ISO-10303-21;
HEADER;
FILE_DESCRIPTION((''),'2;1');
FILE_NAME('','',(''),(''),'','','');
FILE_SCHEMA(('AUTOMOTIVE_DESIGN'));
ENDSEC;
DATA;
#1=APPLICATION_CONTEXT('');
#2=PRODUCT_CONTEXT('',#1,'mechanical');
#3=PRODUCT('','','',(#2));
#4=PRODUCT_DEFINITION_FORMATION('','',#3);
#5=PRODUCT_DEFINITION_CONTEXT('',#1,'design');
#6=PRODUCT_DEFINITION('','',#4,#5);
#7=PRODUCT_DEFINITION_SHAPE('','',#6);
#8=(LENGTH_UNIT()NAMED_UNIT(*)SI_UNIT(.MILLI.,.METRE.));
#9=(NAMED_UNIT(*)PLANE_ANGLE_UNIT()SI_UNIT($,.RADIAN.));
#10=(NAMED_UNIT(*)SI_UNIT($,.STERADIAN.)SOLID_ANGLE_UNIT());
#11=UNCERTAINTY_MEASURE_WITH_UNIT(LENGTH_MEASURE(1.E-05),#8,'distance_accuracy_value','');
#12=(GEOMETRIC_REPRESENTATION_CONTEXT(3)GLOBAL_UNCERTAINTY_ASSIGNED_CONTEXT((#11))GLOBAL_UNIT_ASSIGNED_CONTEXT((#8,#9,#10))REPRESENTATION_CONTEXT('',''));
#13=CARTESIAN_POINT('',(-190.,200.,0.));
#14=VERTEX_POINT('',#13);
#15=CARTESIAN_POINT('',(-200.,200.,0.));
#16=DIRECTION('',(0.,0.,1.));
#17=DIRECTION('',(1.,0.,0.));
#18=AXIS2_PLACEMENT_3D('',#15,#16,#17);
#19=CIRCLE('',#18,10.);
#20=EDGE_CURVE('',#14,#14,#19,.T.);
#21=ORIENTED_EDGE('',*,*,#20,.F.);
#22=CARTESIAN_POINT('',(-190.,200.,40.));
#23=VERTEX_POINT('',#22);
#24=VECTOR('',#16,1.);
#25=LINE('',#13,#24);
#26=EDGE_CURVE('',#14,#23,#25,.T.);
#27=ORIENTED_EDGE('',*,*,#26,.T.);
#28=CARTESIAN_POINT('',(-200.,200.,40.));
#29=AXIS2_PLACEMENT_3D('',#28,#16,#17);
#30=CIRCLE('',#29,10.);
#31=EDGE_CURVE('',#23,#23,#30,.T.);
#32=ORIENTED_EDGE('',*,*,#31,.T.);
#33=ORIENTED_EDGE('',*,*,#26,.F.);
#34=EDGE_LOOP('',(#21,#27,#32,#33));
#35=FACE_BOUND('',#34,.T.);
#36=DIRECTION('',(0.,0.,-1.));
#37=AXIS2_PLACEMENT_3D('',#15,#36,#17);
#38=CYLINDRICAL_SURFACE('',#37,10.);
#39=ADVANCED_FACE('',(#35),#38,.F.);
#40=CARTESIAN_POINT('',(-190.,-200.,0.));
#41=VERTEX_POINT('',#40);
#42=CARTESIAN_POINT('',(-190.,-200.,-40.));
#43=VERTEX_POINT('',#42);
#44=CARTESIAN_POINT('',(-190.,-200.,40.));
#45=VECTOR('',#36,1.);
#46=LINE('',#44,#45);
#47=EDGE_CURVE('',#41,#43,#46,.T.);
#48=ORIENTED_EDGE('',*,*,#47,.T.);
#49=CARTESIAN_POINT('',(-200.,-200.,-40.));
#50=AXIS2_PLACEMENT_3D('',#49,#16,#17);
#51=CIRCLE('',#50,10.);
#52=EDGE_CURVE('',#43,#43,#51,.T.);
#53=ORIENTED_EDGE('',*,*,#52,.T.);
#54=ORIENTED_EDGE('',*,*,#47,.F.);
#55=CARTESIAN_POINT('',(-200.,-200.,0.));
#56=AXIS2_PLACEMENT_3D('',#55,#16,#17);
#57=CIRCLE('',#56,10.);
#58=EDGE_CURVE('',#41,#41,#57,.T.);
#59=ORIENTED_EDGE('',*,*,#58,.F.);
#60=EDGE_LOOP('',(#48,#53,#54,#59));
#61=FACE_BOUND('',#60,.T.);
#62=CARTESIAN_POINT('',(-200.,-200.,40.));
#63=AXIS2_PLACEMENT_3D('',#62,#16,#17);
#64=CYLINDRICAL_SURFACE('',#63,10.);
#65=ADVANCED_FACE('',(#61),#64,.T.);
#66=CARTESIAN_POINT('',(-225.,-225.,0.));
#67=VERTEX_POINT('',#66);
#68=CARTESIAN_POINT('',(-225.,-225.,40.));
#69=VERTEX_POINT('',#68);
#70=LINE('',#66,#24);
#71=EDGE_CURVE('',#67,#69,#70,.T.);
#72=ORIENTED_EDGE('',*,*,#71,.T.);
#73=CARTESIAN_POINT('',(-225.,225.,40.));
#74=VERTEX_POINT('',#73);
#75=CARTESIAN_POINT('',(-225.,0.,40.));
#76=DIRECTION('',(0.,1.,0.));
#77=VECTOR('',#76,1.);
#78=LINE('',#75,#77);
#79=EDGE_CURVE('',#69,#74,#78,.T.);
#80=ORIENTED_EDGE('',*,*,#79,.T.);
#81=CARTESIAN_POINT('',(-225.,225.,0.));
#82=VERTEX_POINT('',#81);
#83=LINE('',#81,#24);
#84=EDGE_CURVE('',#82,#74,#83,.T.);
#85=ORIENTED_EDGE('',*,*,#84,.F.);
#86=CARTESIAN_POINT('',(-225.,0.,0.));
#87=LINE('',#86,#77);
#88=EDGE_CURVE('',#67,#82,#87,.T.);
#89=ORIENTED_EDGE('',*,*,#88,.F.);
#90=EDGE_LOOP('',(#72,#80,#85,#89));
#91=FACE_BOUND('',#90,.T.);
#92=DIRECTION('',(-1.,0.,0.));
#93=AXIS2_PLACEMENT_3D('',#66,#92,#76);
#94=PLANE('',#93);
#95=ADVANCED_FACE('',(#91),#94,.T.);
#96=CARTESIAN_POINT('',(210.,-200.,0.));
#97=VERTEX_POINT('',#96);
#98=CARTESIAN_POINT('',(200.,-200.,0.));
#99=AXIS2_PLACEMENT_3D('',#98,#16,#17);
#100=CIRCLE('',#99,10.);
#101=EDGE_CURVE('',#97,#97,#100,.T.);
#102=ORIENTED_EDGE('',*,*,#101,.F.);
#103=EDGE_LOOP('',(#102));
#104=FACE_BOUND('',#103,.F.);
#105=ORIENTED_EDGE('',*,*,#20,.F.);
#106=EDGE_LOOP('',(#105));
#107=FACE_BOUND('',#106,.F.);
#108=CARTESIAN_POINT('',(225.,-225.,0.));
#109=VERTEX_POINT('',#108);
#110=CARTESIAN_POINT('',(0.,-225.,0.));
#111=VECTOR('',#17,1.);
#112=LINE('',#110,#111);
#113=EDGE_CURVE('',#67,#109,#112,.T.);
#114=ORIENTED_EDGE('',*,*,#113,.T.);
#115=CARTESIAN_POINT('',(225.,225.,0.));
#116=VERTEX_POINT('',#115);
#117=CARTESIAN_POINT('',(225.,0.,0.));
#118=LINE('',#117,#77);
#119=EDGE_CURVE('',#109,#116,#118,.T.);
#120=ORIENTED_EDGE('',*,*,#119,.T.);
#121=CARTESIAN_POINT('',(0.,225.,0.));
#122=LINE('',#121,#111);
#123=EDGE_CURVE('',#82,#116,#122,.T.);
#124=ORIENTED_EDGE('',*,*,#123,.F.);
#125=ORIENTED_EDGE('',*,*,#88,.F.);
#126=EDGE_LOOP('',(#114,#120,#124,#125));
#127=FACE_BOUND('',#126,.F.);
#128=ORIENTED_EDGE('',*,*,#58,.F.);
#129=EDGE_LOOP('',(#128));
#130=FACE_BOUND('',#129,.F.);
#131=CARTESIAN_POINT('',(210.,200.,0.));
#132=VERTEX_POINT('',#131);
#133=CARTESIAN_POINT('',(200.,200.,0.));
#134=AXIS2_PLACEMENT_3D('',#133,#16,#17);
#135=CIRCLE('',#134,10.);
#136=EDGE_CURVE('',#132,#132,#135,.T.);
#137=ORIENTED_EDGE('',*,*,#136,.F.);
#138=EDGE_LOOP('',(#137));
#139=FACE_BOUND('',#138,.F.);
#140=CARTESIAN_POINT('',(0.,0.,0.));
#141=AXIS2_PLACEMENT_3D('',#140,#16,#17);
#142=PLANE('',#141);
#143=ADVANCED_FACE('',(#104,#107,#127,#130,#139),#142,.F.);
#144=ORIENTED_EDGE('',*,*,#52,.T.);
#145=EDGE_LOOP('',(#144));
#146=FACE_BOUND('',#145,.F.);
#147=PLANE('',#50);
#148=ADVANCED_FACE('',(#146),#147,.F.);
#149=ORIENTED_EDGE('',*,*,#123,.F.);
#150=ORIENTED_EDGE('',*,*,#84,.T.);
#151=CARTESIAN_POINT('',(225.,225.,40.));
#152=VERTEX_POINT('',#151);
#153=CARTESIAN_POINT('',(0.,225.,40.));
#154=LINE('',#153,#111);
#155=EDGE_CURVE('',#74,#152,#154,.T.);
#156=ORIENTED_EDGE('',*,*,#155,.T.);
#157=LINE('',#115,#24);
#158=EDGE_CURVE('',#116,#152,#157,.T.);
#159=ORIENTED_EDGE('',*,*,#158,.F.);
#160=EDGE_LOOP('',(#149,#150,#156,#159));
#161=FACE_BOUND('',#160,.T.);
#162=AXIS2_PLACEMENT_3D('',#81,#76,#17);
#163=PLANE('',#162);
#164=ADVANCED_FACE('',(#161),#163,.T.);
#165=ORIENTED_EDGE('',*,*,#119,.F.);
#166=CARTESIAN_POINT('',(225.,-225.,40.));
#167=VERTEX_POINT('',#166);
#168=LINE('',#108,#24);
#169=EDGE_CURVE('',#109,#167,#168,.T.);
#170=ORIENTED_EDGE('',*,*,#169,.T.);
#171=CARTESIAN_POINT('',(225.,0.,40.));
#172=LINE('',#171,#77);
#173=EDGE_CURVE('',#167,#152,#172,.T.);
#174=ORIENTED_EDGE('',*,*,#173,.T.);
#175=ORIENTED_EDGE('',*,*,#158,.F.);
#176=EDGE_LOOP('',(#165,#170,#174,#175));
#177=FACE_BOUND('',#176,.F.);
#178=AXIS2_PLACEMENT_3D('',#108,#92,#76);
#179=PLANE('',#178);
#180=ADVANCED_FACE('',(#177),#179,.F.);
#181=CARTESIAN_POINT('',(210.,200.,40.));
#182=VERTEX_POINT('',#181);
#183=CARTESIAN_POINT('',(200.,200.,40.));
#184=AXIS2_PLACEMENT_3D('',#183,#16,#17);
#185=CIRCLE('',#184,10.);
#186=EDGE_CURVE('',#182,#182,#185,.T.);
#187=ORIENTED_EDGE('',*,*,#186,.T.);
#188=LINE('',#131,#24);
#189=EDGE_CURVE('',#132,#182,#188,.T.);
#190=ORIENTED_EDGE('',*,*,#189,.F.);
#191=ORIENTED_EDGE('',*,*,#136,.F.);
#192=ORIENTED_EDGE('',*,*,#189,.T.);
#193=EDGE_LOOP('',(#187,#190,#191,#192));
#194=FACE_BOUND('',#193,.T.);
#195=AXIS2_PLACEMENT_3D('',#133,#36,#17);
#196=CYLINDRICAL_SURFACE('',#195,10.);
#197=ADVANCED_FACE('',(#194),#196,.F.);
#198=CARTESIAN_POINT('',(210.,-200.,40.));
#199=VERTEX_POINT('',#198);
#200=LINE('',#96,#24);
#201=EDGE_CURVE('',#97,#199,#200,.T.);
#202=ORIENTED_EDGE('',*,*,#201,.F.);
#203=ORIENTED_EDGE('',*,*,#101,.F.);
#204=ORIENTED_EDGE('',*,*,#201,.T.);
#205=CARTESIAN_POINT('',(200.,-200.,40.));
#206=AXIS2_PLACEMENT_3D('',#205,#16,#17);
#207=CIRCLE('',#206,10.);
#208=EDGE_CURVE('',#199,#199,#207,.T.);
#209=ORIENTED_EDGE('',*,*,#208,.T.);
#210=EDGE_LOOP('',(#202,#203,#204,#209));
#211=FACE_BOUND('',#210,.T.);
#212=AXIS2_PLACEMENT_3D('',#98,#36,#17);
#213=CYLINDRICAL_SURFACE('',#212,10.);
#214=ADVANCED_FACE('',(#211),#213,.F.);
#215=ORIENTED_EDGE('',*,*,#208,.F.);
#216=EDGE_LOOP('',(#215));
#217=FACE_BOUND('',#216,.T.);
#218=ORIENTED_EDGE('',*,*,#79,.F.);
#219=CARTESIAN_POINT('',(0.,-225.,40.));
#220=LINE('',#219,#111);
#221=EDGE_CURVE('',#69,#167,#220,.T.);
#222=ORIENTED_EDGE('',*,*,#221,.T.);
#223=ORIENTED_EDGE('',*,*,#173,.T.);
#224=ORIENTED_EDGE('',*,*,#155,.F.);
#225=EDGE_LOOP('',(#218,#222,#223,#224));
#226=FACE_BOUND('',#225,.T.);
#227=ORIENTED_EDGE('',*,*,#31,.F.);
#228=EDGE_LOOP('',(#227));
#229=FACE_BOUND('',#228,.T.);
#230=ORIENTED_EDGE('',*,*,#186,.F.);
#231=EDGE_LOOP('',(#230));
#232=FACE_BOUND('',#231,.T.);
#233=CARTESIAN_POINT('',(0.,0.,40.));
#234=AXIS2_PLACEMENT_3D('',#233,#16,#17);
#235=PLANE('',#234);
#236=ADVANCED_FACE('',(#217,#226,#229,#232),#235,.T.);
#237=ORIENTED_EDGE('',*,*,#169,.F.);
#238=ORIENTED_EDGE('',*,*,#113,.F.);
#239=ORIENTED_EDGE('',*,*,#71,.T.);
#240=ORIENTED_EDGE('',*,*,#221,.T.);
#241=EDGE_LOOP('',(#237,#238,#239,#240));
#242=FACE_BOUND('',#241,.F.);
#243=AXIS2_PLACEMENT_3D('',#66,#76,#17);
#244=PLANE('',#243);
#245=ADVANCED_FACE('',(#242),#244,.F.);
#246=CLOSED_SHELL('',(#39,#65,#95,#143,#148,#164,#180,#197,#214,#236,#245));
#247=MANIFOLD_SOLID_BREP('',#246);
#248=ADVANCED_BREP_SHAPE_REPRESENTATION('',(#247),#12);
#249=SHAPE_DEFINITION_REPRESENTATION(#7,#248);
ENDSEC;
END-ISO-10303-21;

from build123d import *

# Parameters (mm, degrees)
F0_W     = 450
F0_H     = 450
F0_R     = 10
F1_DEPTH = 40
F2_R     = 10
F3_DEPTH = 80


# Not quite as in the source:
# - the program builds the solid bodies; features that only make, move or delete a surface that nothing else refers to are left out


with BuildPart() as f1:
    # F0 (on Top) → F1 (new body)
    with BuildSketch(Plane.XY):
        Rectangle(F0_W, F0_H)
        with Locations((-200, -200)):
            Circle(F0_R, mode=Mode.SUBTRACT)
        with Locations((200, -200)):
            Circle(F0_R, mode=Mode.SUBTRACT)
        with Locations((-200, 200)):
            Circle(F0_R, mode=Mode.SUBTRACT)
        with Locations((200, 200)):
            Circle(F0_R, mode=Mode.SUBTRACT)
    extrude(amount=F1_DEPTH)

    # F2 (on face) → F3 (join)
    with BuildSketch(Plane.XY.offset(40)):
        with Locations((-200, -200)):
            Circle(F2_R)
    extrude(amount=-F3_DEPTH)


solid = f1.part
